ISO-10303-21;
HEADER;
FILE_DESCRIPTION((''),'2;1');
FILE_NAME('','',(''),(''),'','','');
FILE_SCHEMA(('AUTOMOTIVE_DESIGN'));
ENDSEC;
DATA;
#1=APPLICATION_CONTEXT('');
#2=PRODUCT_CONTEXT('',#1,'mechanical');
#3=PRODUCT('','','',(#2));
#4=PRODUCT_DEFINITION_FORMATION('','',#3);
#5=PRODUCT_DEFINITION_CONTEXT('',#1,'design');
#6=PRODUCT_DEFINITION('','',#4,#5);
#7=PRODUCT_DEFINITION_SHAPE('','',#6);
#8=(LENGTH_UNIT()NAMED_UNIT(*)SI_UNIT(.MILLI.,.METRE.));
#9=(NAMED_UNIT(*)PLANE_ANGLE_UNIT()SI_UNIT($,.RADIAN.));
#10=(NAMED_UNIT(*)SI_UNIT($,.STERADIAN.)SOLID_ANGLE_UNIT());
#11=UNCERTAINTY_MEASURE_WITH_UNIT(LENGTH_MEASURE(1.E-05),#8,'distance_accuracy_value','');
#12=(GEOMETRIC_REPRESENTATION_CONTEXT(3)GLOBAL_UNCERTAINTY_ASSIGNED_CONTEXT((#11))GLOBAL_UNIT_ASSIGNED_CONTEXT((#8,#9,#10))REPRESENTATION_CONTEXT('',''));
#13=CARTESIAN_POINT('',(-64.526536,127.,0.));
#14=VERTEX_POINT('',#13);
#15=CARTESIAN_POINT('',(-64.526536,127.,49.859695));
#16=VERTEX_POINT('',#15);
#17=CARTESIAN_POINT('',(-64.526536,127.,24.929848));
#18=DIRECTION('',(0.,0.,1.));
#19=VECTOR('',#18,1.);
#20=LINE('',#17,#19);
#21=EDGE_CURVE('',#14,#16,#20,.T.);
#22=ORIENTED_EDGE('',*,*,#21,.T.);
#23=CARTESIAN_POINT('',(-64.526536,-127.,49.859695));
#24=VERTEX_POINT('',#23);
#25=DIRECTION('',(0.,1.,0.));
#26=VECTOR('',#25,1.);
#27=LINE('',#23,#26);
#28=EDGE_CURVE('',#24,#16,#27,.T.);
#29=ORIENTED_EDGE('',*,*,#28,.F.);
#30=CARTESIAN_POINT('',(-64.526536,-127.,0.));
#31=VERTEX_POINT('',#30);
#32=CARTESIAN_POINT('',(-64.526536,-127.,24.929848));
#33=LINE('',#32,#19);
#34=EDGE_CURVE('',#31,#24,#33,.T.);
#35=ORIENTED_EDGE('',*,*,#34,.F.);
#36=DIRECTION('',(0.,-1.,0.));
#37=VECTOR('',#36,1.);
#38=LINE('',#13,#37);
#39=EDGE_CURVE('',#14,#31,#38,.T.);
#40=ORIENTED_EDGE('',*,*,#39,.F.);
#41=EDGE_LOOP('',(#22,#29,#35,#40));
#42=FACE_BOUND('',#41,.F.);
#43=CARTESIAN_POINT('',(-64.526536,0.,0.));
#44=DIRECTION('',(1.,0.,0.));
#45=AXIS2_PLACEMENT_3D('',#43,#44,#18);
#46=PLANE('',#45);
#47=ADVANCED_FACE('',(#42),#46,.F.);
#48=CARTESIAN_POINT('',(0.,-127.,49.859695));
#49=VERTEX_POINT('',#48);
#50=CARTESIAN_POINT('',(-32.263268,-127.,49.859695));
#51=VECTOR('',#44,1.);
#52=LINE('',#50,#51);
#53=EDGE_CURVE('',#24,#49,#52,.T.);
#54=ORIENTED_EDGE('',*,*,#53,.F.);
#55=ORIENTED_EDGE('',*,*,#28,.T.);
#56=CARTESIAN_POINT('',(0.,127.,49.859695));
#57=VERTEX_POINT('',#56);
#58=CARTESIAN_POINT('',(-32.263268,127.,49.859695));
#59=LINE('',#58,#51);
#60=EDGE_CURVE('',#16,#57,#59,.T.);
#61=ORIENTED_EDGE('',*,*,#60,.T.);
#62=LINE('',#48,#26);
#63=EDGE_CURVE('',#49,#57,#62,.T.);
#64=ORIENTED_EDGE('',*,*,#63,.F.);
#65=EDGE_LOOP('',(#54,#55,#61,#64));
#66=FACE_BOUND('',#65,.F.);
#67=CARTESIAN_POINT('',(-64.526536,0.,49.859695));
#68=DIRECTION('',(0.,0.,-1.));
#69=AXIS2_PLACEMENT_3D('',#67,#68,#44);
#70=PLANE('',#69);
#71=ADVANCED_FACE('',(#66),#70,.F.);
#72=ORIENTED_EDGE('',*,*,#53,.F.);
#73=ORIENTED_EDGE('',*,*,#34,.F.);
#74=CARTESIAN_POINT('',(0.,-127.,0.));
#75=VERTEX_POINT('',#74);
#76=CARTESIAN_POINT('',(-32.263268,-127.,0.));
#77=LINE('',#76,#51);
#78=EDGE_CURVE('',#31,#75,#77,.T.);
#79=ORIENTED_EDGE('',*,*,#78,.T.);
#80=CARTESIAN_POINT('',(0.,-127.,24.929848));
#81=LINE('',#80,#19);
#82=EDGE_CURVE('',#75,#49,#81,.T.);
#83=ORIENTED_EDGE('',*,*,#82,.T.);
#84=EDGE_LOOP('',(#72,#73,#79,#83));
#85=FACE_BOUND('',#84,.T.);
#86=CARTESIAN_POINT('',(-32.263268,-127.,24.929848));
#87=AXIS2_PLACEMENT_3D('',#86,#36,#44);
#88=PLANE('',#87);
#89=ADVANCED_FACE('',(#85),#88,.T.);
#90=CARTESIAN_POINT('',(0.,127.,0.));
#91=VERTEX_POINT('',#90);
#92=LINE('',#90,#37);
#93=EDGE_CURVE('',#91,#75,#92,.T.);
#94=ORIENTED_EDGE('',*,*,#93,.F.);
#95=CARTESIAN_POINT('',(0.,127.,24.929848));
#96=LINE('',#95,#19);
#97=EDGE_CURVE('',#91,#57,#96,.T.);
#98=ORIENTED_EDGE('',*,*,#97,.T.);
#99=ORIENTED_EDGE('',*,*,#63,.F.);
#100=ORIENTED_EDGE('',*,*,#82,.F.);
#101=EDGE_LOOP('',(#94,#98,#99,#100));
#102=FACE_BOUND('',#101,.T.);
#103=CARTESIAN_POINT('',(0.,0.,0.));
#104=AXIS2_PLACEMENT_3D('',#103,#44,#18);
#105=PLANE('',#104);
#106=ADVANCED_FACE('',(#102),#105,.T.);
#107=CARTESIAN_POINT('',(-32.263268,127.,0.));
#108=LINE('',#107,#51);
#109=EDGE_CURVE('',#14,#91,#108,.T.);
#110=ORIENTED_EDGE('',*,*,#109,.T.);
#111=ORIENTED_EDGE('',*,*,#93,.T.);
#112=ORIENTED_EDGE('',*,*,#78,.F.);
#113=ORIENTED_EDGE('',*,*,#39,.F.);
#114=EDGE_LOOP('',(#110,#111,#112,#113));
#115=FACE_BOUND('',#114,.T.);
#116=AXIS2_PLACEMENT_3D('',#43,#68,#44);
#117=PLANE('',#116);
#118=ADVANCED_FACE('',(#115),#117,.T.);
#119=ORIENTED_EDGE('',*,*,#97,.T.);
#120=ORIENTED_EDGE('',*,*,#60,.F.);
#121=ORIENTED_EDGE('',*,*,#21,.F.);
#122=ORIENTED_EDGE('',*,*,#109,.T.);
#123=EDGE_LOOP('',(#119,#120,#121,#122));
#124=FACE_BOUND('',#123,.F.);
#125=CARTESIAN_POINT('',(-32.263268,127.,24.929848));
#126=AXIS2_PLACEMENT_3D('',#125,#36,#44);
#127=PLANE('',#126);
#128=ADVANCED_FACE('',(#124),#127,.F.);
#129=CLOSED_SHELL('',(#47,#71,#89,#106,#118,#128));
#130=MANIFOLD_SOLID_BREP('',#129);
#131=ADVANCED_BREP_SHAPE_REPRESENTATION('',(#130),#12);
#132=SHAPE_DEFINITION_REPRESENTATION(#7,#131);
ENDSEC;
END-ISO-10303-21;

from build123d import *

# Parameters (mm, degrees)
F0_W          = 64.5265355706
F0_H          = 49.8596951365
F1_DEPTH      = 127
F1_DEPTH_BACK = 127


# Not quite as in the source:
# - a feature of the source that left no trace in its solid (it failed there, or was rolled back) is left out


with BuildPart() as f1:
    # F0 (on Front) → F1 (new body, two sides)
    with BuildSketch(Plane.XZ) as f1_sk:
        with Locations((-32.2632677853, 24.9298475683)):
            Rectangle(F0_W, F0_H)
    extrude(amount=F1_DEPTH)
    extrude(f1_sk.sketch, amount=-F1_DEPTH_BACK)


solid = f1.part
